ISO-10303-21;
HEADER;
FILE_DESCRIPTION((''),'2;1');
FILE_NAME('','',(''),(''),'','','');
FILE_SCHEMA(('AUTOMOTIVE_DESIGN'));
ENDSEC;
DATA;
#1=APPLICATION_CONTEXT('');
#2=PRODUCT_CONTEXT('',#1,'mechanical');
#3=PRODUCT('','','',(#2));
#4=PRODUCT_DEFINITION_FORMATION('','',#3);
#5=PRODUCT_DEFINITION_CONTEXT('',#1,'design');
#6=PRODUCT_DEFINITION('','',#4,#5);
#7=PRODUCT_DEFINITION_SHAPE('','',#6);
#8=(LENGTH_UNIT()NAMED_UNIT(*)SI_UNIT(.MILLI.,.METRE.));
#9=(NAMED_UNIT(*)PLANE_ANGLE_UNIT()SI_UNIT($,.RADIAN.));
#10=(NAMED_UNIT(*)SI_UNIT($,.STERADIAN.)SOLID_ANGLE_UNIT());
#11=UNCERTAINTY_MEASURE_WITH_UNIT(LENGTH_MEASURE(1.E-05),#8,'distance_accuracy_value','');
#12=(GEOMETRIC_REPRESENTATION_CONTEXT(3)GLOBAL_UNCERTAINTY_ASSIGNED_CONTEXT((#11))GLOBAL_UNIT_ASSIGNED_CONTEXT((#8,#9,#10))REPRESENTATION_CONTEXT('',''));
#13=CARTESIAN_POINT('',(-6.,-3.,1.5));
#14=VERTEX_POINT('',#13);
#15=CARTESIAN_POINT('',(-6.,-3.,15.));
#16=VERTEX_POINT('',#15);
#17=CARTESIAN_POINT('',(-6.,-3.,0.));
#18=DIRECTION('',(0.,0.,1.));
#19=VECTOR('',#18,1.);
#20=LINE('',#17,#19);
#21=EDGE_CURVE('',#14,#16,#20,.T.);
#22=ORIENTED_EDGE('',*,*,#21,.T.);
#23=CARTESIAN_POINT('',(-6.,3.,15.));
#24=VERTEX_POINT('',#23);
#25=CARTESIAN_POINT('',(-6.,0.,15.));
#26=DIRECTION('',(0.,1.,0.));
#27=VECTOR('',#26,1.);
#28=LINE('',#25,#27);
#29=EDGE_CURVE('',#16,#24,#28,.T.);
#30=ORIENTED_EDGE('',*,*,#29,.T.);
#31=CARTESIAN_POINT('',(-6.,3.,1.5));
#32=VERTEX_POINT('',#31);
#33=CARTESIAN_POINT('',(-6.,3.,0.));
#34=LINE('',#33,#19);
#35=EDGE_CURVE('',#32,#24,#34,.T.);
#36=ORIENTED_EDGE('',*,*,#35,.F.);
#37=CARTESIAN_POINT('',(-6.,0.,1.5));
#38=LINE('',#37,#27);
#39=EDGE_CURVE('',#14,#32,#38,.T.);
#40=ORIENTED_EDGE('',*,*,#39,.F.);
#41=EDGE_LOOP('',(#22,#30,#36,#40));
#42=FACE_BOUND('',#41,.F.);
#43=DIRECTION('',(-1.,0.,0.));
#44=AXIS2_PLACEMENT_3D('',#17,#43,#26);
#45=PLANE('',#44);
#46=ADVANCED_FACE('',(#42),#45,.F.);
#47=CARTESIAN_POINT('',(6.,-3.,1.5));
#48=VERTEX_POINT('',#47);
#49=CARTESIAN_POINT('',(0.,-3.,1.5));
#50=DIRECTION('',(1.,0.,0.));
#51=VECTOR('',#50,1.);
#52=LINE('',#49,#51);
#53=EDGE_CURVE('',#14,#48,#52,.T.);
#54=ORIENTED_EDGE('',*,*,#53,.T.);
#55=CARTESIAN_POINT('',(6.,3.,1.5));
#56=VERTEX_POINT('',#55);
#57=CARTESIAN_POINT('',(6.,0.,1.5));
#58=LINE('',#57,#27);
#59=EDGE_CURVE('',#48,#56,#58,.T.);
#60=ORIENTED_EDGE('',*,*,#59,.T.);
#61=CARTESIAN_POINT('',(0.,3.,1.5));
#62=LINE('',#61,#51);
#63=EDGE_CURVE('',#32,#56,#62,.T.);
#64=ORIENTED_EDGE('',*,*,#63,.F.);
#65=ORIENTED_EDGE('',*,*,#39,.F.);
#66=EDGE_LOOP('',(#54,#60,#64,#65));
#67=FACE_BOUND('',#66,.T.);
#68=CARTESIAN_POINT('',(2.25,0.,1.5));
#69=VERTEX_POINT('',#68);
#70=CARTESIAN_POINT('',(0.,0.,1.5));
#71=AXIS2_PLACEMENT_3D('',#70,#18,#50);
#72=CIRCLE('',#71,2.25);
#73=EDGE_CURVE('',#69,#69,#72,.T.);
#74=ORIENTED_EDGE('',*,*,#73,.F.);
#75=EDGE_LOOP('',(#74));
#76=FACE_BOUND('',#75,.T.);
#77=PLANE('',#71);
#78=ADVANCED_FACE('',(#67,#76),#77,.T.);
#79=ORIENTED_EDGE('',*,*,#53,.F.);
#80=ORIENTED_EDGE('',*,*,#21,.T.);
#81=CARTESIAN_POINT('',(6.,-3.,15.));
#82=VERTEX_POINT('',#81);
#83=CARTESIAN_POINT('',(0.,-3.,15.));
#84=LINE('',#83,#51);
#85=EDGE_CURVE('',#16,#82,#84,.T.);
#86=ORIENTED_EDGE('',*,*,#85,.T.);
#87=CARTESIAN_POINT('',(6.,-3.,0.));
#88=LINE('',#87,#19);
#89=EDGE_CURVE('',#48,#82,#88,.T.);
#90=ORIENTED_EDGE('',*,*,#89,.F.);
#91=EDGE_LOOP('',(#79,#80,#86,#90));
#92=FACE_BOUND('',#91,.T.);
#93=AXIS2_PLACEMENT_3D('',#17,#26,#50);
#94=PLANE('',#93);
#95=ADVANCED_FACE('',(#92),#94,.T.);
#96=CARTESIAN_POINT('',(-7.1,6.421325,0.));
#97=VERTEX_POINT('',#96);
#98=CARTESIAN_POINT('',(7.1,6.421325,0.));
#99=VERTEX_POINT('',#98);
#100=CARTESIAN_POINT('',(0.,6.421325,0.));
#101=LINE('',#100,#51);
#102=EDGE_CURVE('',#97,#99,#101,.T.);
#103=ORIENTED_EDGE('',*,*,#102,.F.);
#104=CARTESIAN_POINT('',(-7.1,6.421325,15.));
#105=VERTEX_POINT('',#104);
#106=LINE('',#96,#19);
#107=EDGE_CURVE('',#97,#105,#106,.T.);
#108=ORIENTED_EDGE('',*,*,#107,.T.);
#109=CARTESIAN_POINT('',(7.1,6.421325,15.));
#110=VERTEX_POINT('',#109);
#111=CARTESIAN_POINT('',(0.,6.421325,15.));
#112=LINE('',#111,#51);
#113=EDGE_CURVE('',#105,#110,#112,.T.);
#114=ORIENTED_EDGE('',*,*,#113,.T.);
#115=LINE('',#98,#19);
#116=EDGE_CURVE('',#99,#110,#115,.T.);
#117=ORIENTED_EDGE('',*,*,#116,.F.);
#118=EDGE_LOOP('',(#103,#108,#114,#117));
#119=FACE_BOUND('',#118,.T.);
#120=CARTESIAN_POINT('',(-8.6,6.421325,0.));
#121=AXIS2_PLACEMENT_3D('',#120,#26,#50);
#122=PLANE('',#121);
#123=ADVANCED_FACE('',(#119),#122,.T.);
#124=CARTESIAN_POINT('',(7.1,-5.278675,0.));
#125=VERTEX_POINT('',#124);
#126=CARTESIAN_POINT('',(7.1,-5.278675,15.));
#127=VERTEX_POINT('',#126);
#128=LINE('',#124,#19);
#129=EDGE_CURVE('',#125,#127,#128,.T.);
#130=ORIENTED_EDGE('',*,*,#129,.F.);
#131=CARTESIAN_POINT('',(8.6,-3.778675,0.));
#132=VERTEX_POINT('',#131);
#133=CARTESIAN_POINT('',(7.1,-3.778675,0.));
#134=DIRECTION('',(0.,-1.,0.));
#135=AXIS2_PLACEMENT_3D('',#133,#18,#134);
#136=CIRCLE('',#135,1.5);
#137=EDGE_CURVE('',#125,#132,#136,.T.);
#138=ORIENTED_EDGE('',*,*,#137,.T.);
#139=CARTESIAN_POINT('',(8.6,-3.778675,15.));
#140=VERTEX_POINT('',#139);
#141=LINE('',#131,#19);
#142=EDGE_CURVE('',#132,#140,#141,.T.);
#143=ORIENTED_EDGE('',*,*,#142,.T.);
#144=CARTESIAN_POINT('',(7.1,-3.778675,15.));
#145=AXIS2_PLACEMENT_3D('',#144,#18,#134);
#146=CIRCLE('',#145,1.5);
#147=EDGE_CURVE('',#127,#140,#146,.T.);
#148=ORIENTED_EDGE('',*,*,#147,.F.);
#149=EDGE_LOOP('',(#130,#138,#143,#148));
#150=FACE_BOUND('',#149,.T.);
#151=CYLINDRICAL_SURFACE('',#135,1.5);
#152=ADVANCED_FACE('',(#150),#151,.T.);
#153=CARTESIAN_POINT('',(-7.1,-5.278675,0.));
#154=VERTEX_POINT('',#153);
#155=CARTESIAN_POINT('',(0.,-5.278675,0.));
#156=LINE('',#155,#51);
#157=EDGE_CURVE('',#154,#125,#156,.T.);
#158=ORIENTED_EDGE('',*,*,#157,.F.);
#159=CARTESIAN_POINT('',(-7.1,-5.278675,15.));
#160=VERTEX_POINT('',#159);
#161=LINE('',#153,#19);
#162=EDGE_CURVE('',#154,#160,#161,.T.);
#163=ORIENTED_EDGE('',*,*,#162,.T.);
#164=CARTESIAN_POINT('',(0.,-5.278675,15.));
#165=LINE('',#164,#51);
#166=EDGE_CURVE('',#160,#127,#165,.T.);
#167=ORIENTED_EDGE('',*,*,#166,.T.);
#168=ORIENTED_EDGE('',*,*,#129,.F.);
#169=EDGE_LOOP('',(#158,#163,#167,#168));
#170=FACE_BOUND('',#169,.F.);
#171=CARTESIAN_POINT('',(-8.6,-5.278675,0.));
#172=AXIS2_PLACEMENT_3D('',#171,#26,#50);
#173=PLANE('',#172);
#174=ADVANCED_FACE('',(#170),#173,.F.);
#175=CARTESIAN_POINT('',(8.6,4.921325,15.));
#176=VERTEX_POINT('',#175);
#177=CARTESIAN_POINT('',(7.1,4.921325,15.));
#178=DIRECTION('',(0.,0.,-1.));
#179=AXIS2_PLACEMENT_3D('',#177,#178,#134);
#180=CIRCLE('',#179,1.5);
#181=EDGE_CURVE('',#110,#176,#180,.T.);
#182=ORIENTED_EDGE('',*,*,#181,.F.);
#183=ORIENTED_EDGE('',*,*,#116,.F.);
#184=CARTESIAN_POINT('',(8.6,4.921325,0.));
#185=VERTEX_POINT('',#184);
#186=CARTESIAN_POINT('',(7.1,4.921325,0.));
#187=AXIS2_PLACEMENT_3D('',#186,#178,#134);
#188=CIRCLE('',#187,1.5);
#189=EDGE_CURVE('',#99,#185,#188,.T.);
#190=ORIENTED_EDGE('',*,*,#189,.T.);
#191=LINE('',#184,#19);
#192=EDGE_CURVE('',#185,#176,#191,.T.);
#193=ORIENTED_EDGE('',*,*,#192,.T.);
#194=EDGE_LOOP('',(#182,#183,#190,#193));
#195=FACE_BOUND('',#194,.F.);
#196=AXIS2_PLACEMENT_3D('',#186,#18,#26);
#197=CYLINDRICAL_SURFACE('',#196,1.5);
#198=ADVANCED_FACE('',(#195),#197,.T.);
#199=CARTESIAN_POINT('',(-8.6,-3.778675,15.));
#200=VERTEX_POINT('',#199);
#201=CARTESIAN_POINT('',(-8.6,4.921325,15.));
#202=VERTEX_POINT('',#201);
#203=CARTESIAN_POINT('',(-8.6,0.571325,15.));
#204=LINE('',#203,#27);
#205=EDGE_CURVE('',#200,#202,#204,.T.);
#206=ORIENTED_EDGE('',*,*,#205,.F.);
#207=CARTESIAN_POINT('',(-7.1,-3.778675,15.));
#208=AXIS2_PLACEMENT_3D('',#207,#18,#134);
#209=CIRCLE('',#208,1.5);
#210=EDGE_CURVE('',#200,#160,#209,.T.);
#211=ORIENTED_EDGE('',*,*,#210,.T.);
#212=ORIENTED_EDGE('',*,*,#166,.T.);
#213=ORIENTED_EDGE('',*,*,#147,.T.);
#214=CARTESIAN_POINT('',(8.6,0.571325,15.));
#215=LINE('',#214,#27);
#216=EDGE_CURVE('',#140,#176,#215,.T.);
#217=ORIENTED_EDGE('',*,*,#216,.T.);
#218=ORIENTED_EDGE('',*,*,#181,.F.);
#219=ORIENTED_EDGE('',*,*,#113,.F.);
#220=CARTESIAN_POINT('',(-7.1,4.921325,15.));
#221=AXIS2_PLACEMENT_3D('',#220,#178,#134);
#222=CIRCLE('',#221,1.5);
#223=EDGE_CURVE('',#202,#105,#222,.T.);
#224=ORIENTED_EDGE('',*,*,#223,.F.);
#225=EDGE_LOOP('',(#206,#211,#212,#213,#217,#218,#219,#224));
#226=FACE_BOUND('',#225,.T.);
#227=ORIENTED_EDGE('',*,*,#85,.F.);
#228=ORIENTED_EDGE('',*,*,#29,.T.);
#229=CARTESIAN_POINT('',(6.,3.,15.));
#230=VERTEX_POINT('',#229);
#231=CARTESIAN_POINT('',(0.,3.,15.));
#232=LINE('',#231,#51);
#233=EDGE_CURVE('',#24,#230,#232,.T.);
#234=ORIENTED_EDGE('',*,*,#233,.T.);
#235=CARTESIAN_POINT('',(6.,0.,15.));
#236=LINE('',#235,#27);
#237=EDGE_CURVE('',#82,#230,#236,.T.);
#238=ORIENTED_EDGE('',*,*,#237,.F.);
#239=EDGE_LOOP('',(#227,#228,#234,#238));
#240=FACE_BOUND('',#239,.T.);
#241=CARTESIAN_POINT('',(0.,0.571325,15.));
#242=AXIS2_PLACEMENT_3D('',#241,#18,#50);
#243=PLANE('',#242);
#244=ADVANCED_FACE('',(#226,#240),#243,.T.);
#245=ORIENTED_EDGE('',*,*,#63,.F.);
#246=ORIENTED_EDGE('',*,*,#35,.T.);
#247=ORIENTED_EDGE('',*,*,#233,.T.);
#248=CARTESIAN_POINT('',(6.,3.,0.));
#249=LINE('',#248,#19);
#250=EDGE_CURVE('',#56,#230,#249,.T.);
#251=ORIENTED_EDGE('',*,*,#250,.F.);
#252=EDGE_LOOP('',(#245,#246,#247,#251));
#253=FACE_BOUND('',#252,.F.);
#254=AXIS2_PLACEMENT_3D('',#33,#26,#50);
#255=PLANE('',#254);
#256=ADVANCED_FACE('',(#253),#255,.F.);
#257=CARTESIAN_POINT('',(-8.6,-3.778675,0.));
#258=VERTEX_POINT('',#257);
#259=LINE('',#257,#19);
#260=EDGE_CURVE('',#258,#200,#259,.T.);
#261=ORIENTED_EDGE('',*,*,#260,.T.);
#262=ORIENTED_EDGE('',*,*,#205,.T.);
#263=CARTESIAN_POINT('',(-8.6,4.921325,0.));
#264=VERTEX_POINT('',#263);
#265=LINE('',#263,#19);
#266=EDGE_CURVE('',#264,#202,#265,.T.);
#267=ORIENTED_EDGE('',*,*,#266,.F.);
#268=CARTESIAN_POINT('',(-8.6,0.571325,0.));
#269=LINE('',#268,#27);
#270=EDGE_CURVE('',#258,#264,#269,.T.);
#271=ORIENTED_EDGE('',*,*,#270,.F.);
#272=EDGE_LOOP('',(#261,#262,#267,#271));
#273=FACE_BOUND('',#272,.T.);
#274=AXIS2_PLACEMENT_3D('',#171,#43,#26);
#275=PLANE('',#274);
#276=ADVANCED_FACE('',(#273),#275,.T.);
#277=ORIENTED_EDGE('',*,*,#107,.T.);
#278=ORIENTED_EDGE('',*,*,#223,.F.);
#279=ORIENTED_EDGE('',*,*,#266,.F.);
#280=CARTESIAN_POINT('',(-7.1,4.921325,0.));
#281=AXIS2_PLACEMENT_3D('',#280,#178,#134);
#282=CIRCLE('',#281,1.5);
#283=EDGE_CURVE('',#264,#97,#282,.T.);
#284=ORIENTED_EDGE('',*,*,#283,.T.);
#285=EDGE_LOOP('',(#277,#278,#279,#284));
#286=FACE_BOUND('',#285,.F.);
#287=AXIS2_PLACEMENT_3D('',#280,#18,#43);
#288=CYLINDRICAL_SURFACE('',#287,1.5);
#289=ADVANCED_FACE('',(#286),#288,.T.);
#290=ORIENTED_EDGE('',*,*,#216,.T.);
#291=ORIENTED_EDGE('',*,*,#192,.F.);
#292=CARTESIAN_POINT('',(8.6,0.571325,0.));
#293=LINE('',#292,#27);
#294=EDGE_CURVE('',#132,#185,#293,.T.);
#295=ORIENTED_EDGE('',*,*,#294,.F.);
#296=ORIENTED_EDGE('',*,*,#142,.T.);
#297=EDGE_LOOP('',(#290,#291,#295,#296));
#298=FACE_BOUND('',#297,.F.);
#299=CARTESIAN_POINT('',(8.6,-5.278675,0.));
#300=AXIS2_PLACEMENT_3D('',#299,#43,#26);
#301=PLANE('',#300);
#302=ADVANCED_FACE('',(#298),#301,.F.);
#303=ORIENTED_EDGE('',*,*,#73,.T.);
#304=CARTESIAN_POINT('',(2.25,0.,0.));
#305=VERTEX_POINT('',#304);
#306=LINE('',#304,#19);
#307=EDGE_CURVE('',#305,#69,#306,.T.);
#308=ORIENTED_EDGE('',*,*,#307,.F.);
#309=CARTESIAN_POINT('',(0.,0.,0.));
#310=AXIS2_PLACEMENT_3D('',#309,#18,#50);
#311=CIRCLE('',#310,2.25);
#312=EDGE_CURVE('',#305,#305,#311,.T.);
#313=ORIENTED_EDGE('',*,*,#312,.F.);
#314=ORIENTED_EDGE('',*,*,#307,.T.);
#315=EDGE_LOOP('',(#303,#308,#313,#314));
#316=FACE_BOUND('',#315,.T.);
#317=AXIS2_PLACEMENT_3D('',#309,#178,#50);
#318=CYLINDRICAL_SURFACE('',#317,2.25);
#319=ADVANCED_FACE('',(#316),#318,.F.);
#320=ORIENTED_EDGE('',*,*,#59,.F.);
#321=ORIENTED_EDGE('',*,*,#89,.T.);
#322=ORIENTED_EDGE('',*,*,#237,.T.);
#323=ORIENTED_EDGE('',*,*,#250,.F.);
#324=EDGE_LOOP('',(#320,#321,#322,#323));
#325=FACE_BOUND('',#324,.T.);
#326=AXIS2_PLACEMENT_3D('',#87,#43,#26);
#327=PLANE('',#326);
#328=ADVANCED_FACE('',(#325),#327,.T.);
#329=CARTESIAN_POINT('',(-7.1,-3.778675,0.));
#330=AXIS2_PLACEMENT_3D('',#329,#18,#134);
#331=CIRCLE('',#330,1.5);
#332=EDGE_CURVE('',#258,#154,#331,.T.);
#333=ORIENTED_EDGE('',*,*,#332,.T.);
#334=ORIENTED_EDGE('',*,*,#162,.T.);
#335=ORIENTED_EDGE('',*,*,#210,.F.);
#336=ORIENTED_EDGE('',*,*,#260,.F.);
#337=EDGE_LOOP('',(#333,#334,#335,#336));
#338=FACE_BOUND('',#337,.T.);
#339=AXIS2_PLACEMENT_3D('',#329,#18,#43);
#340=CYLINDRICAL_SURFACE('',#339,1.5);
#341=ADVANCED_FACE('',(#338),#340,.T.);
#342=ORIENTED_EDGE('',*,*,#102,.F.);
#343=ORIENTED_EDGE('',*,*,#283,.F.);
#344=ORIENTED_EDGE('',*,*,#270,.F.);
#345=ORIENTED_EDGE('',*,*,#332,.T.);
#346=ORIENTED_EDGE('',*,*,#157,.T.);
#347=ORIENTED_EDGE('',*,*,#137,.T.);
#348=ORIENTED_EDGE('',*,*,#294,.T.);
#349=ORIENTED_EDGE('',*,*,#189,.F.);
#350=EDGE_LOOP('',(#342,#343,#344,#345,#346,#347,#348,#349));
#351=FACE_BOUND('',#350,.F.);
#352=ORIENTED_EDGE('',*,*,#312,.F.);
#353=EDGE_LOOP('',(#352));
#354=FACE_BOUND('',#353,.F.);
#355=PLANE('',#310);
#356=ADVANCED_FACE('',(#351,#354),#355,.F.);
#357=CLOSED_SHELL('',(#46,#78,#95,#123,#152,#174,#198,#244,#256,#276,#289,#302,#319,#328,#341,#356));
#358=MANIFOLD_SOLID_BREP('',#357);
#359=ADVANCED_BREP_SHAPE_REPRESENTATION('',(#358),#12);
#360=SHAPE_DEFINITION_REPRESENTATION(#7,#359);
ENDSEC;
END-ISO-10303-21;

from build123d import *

# Parameters (mm, degrees)
F0_W     = 17.2
F0_H     = 11.7
F0_W_2   = 12
F0_H_2   = 6
F1_DEPTH = 15
F2_R     = 1.5
F0_R     = 2.25
F3_DEPTH = 1.5


# Not quite as in the source:
# - a feature names something its author has since deleted; it is built from what else it names


with BuildPart() as f1:
    # F0 (on Top) → F1 (new body)
    with BuildSketch(Plane.XY):
        with Locations((0, 0.571324781)):
            Rectangle(F0_W, F0_H)
        Rectangle(F0_W_2, F0_H_2, mode=Mode.SUBTRACT)
    extrude(amount=F1_DEPTH)

    # F2
    f2_edges = [f1.edges().sort_by_distance(p)[0] for p in [
        (-8.6, 6.421325, 7.5),
        (8.6, 6.421325, 7.5),
        (8.6, -5.278675, 7.5),
        (-8.6, -5.278675, 7.5),
    ]]
    fillet(f2_edges, radius=F2_R)

    # F0 (on Top) → F3 (join)
    with BuildSketch(Plane.XY):
        Rectangle(F0_W_2, F0_H_2)
        Circle(F0_R, mode=Mode.SUBTRACT)
    extrude(amount=F3_DEPTH)


solid = f1.part
